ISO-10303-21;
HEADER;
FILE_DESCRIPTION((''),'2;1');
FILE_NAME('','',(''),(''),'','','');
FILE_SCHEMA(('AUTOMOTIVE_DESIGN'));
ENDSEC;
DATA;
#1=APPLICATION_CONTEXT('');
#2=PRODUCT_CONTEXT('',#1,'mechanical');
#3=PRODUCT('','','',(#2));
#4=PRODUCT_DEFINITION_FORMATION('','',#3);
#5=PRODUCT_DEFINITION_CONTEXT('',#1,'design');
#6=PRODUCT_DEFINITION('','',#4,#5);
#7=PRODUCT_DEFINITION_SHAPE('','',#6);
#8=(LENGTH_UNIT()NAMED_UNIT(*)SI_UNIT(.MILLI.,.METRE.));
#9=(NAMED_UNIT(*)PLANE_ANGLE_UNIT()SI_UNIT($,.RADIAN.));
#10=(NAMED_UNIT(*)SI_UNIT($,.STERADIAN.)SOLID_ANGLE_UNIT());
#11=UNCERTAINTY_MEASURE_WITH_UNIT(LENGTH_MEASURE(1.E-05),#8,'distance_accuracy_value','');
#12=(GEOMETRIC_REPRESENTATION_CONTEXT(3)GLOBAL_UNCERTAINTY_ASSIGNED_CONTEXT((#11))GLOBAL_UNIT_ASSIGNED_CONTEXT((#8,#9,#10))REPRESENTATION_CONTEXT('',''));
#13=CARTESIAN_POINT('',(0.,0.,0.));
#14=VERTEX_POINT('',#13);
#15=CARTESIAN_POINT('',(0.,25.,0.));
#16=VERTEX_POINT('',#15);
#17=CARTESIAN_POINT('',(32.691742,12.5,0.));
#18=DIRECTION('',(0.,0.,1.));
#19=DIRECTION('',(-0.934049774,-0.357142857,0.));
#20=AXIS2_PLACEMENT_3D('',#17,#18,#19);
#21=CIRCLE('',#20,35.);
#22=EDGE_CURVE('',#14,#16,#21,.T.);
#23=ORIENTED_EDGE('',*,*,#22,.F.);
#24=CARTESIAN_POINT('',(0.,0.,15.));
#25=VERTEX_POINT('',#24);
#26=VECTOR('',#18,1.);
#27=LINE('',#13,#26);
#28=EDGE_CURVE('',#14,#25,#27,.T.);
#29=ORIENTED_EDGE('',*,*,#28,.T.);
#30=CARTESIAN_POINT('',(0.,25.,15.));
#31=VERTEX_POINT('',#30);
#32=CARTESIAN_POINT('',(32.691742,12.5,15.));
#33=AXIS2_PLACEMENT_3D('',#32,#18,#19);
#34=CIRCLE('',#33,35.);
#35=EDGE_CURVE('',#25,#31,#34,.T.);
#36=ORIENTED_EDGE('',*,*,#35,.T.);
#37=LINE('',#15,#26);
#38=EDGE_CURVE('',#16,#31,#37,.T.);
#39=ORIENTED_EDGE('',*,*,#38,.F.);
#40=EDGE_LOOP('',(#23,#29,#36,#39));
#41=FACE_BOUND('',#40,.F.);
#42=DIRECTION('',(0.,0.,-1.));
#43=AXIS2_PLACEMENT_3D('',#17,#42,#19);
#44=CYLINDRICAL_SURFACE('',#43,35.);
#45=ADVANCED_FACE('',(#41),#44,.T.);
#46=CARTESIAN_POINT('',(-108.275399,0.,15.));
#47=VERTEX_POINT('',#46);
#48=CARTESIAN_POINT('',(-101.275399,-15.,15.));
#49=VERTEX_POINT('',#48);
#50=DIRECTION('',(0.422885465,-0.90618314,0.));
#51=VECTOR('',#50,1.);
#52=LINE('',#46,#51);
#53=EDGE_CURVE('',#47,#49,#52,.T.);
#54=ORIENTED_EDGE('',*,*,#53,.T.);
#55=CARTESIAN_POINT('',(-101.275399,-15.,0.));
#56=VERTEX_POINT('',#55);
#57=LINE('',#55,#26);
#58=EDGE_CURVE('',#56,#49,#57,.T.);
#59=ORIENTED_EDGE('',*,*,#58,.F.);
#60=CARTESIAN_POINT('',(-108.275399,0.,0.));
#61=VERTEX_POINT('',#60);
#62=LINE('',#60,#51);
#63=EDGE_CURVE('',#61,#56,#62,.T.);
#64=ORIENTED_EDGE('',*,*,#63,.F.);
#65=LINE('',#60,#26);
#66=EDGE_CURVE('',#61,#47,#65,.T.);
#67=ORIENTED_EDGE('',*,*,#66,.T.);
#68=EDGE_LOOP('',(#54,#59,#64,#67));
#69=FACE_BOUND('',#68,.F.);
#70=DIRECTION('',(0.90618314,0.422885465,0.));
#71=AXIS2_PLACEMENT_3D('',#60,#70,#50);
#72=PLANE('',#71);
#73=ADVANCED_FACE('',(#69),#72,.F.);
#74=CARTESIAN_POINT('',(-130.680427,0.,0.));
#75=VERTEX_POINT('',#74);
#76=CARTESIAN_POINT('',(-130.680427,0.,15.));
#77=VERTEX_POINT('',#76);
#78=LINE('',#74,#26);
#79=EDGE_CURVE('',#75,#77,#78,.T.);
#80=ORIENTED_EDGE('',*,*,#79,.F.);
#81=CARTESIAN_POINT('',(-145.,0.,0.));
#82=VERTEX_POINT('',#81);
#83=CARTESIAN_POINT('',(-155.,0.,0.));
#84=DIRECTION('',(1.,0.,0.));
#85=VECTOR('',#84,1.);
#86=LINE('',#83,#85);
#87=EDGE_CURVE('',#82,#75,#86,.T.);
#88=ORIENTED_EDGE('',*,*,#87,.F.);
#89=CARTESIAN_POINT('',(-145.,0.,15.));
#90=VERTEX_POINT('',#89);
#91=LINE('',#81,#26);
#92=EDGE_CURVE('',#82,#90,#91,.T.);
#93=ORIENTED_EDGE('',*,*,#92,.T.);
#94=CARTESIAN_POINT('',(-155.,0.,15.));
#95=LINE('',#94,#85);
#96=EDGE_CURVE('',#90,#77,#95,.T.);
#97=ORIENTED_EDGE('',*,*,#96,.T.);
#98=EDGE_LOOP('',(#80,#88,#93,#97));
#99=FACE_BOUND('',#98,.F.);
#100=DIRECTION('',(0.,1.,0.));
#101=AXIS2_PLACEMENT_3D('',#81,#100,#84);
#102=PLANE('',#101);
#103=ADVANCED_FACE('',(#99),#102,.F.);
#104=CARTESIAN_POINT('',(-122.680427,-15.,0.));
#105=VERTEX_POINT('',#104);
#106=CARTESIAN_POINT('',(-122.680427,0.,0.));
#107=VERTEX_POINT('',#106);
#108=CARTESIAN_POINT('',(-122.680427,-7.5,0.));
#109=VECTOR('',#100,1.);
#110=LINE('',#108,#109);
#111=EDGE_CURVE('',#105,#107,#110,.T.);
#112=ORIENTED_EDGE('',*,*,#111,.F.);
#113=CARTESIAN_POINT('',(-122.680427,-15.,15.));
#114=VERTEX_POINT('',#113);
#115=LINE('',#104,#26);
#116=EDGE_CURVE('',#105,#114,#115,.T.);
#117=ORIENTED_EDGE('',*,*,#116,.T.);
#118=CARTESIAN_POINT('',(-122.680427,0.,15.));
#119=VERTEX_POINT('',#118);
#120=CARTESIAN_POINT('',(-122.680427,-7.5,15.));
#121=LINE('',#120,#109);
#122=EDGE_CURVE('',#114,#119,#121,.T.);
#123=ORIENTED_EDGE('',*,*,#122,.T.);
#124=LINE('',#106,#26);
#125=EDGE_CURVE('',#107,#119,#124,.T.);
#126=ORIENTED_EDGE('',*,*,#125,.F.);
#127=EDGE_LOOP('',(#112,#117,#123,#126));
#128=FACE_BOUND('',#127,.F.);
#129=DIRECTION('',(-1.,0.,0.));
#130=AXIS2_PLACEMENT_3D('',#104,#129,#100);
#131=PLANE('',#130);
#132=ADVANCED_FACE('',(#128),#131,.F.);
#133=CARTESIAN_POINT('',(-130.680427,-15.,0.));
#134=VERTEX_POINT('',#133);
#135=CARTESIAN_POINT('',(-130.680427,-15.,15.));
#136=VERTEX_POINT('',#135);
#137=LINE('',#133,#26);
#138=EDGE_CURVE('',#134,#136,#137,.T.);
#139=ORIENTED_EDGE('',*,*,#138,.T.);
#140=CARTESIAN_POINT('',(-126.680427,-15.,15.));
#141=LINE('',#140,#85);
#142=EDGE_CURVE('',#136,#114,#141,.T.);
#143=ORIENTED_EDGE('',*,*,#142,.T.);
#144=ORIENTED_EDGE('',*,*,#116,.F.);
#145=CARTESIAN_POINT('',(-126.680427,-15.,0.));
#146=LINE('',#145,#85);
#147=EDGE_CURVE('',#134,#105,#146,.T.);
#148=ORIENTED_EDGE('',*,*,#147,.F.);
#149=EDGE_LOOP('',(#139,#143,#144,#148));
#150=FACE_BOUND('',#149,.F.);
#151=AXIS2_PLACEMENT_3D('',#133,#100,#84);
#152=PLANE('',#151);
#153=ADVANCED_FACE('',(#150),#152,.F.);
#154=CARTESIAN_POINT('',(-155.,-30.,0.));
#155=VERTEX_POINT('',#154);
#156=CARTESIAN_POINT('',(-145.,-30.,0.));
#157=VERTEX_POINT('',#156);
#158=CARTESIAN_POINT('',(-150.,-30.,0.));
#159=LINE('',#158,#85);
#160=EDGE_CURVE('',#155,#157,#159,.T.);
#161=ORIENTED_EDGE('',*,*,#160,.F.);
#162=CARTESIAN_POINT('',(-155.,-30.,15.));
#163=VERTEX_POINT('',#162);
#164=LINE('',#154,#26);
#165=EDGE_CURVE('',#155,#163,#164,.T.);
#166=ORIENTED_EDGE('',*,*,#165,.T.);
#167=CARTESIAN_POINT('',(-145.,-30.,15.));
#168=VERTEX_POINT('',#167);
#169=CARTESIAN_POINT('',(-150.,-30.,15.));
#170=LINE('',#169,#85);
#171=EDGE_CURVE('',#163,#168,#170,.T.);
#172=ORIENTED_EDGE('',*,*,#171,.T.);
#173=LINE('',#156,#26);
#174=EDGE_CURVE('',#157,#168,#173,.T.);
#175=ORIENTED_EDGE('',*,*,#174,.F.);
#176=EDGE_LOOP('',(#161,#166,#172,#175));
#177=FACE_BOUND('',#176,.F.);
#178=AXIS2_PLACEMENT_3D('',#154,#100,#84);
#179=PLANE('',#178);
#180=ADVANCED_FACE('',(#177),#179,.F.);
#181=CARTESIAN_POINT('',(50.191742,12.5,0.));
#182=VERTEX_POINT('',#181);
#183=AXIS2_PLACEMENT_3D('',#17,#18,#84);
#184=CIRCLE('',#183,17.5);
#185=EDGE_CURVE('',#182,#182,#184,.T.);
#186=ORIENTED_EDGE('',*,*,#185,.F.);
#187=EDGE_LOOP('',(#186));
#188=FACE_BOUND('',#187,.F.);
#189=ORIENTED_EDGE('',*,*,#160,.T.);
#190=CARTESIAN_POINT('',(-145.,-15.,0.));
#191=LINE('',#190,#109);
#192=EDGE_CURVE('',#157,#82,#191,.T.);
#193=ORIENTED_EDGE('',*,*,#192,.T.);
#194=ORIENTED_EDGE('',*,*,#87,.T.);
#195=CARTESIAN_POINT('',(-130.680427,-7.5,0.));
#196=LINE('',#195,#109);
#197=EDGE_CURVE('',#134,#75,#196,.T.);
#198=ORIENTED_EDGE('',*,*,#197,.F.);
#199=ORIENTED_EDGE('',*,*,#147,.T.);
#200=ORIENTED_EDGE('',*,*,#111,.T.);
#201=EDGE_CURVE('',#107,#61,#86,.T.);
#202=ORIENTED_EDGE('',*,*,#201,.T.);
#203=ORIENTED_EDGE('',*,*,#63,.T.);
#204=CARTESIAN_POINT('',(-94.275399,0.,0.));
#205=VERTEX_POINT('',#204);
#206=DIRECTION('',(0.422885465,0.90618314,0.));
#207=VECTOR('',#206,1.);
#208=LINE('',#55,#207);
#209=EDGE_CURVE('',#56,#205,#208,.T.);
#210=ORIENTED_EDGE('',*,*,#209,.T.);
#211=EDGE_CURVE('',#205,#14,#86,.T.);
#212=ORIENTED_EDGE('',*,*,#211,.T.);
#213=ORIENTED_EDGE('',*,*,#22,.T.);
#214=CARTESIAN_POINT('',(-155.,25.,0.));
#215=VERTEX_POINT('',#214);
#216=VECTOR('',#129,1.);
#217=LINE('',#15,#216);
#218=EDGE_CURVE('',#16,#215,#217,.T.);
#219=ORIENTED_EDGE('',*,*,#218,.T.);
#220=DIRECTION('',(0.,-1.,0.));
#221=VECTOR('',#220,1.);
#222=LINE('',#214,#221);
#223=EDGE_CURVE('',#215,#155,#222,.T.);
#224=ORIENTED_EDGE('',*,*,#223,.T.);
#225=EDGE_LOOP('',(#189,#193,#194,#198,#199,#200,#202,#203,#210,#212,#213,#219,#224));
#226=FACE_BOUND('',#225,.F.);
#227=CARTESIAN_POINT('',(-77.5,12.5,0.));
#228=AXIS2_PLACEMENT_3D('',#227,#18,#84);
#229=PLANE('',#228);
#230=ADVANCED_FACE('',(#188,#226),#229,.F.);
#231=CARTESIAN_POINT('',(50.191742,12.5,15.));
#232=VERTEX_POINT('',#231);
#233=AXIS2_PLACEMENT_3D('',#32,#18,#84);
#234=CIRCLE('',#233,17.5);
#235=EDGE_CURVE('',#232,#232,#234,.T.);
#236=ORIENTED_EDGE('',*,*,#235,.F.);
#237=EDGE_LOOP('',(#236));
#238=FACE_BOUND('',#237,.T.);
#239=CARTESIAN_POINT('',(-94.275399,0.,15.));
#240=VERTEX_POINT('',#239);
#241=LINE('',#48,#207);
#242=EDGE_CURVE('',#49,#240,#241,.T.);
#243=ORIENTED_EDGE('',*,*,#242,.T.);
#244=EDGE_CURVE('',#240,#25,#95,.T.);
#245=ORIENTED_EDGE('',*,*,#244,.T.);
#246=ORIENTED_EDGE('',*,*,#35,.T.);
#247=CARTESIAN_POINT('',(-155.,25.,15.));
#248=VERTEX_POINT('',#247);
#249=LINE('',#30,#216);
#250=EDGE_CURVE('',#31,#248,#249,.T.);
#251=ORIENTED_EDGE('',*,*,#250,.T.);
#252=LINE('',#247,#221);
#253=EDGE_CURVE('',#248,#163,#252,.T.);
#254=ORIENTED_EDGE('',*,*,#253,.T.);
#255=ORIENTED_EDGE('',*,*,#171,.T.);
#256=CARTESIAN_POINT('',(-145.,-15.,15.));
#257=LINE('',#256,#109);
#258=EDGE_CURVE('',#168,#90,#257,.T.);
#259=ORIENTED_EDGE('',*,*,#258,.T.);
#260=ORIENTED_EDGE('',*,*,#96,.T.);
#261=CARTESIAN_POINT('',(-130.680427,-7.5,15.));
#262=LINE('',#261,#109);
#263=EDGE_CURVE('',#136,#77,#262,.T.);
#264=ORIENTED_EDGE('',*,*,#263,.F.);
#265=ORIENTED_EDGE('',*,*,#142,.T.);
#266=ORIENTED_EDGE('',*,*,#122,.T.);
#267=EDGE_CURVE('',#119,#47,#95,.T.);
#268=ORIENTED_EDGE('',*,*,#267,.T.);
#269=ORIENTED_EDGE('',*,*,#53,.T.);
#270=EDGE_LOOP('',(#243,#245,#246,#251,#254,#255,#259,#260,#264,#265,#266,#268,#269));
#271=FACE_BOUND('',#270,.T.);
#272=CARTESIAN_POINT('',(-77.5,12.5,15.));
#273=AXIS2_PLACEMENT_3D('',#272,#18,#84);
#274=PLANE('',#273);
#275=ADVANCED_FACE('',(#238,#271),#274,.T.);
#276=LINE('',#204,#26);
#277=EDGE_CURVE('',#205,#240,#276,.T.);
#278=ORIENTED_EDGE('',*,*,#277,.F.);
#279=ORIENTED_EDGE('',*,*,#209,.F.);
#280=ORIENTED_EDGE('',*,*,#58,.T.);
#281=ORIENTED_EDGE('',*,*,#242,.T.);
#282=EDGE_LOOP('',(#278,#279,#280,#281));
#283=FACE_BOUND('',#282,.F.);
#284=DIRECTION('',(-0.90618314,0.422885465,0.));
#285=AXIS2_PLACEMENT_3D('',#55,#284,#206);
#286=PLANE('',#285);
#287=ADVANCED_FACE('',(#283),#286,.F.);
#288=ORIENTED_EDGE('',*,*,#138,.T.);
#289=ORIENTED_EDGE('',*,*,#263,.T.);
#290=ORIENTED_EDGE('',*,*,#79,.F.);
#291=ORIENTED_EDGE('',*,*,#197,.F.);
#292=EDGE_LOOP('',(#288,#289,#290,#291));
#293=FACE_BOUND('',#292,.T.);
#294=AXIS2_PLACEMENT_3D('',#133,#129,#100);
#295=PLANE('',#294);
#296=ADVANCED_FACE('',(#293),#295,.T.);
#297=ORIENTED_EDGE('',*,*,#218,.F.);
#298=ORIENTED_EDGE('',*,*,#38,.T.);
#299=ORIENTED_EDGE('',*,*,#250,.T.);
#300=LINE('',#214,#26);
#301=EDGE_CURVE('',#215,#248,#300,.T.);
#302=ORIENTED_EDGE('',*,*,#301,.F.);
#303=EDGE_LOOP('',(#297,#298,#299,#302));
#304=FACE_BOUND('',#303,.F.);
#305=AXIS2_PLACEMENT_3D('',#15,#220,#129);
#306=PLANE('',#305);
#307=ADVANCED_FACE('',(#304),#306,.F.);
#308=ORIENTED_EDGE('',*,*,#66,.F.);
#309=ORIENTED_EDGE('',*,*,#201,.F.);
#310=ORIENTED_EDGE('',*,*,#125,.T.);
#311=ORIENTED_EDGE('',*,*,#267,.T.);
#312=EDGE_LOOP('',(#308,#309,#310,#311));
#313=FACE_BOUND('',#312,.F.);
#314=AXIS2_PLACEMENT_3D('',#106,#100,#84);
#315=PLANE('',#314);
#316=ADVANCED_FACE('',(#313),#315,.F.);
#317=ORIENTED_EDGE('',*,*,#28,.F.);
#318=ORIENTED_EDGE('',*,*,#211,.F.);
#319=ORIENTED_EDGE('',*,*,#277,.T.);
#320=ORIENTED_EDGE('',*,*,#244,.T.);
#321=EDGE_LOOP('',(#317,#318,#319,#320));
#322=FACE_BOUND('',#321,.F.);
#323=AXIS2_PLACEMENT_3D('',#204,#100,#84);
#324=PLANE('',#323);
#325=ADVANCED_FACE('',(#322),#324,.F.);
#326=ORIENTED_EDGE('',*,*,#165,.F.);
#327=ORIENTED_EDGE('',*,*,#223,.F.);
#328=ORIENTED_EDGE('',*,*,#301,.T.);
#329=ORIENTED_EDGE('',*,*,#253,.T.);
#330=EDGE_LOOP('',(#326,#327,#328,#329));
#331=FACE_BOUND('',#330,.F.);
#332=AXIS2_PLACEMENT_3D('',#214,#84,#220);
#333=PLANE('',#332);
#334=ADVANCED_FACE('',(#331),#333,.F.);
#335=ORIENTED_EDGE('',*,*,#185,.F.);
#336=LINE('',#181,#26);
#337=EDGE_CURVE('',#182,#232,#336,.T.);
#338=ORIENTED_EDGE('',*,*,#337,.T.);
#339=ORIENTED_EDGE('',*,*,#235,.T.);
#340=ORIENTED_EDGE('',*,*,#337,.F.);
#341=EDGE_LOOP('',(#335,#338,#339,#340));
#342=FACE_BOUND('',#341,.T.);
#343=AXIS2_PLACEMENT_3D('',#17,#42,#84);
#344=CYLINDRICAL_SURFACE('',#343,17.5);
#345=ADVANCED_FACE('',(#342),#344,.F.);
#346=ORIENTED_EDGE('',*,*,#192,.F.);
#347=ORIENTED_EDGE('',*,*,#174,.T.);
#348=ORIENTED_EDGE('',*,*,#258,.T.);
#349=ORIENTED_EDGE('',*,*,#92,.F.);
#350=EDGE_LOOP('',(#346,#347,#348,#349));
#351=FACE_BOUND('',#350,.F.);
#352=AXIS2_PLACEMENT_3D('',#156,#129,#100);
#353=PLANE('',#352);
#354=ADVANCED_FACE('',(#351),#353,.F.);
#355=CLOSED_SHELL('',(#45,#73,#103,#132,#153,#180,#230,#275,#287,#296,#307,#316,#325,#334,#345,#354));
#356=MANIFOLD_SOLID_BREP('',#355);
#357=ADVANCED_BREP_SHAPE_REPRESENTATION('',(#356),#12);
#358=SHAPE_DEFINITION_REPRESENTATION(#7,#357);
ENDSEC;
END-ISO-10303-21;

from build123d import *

# Parameters (mm, degrees)
F0_R     = 17.5
F0_W     = 10
F0_H     = 30
F0_W_2   = 8
F0_H_2   = 15
F1_DEPTH = 15


# Not quite as in the source:
# - a feature of the source that left no trace in its solid (it failed there, or was rolled back) is left out


with BuildPart() as f1:
    # F0 (on Top) → F1 (new body)
    with BuildSketch(Plane.XY):
        Polygon((-94.275398612, 0), (0, 0), (0, 25), (-155, 25), (-155, 0), (-145, 0), (-130.6804269552, 0), (-122.6804269552, 0), (-108.275398612, 0), align=None)
        with BuildLine():
            Line((0, 25), (0, 0))
            ThreePointArc((0, 0), (67.6917420766, 12.5), (0, 25))
        make_face()
        with Locations((32.6917420766, 12.5)):
            Circle(F0_R, mode=Mode.SUBTRACT)
        with Locations((-150, -15)):
            Rectangle(F0_W, F0_H)
        with Locations((-126.6804269552, -7.5)):
            Rectangle(F0_W_2, F0_H_2)
        Polygon((-101.275398612, -15), (-94.275398612, 0), (-108.275398612, 0), align=None)
    extrude(amount=F1_DEPTH)


solid = f1.part
